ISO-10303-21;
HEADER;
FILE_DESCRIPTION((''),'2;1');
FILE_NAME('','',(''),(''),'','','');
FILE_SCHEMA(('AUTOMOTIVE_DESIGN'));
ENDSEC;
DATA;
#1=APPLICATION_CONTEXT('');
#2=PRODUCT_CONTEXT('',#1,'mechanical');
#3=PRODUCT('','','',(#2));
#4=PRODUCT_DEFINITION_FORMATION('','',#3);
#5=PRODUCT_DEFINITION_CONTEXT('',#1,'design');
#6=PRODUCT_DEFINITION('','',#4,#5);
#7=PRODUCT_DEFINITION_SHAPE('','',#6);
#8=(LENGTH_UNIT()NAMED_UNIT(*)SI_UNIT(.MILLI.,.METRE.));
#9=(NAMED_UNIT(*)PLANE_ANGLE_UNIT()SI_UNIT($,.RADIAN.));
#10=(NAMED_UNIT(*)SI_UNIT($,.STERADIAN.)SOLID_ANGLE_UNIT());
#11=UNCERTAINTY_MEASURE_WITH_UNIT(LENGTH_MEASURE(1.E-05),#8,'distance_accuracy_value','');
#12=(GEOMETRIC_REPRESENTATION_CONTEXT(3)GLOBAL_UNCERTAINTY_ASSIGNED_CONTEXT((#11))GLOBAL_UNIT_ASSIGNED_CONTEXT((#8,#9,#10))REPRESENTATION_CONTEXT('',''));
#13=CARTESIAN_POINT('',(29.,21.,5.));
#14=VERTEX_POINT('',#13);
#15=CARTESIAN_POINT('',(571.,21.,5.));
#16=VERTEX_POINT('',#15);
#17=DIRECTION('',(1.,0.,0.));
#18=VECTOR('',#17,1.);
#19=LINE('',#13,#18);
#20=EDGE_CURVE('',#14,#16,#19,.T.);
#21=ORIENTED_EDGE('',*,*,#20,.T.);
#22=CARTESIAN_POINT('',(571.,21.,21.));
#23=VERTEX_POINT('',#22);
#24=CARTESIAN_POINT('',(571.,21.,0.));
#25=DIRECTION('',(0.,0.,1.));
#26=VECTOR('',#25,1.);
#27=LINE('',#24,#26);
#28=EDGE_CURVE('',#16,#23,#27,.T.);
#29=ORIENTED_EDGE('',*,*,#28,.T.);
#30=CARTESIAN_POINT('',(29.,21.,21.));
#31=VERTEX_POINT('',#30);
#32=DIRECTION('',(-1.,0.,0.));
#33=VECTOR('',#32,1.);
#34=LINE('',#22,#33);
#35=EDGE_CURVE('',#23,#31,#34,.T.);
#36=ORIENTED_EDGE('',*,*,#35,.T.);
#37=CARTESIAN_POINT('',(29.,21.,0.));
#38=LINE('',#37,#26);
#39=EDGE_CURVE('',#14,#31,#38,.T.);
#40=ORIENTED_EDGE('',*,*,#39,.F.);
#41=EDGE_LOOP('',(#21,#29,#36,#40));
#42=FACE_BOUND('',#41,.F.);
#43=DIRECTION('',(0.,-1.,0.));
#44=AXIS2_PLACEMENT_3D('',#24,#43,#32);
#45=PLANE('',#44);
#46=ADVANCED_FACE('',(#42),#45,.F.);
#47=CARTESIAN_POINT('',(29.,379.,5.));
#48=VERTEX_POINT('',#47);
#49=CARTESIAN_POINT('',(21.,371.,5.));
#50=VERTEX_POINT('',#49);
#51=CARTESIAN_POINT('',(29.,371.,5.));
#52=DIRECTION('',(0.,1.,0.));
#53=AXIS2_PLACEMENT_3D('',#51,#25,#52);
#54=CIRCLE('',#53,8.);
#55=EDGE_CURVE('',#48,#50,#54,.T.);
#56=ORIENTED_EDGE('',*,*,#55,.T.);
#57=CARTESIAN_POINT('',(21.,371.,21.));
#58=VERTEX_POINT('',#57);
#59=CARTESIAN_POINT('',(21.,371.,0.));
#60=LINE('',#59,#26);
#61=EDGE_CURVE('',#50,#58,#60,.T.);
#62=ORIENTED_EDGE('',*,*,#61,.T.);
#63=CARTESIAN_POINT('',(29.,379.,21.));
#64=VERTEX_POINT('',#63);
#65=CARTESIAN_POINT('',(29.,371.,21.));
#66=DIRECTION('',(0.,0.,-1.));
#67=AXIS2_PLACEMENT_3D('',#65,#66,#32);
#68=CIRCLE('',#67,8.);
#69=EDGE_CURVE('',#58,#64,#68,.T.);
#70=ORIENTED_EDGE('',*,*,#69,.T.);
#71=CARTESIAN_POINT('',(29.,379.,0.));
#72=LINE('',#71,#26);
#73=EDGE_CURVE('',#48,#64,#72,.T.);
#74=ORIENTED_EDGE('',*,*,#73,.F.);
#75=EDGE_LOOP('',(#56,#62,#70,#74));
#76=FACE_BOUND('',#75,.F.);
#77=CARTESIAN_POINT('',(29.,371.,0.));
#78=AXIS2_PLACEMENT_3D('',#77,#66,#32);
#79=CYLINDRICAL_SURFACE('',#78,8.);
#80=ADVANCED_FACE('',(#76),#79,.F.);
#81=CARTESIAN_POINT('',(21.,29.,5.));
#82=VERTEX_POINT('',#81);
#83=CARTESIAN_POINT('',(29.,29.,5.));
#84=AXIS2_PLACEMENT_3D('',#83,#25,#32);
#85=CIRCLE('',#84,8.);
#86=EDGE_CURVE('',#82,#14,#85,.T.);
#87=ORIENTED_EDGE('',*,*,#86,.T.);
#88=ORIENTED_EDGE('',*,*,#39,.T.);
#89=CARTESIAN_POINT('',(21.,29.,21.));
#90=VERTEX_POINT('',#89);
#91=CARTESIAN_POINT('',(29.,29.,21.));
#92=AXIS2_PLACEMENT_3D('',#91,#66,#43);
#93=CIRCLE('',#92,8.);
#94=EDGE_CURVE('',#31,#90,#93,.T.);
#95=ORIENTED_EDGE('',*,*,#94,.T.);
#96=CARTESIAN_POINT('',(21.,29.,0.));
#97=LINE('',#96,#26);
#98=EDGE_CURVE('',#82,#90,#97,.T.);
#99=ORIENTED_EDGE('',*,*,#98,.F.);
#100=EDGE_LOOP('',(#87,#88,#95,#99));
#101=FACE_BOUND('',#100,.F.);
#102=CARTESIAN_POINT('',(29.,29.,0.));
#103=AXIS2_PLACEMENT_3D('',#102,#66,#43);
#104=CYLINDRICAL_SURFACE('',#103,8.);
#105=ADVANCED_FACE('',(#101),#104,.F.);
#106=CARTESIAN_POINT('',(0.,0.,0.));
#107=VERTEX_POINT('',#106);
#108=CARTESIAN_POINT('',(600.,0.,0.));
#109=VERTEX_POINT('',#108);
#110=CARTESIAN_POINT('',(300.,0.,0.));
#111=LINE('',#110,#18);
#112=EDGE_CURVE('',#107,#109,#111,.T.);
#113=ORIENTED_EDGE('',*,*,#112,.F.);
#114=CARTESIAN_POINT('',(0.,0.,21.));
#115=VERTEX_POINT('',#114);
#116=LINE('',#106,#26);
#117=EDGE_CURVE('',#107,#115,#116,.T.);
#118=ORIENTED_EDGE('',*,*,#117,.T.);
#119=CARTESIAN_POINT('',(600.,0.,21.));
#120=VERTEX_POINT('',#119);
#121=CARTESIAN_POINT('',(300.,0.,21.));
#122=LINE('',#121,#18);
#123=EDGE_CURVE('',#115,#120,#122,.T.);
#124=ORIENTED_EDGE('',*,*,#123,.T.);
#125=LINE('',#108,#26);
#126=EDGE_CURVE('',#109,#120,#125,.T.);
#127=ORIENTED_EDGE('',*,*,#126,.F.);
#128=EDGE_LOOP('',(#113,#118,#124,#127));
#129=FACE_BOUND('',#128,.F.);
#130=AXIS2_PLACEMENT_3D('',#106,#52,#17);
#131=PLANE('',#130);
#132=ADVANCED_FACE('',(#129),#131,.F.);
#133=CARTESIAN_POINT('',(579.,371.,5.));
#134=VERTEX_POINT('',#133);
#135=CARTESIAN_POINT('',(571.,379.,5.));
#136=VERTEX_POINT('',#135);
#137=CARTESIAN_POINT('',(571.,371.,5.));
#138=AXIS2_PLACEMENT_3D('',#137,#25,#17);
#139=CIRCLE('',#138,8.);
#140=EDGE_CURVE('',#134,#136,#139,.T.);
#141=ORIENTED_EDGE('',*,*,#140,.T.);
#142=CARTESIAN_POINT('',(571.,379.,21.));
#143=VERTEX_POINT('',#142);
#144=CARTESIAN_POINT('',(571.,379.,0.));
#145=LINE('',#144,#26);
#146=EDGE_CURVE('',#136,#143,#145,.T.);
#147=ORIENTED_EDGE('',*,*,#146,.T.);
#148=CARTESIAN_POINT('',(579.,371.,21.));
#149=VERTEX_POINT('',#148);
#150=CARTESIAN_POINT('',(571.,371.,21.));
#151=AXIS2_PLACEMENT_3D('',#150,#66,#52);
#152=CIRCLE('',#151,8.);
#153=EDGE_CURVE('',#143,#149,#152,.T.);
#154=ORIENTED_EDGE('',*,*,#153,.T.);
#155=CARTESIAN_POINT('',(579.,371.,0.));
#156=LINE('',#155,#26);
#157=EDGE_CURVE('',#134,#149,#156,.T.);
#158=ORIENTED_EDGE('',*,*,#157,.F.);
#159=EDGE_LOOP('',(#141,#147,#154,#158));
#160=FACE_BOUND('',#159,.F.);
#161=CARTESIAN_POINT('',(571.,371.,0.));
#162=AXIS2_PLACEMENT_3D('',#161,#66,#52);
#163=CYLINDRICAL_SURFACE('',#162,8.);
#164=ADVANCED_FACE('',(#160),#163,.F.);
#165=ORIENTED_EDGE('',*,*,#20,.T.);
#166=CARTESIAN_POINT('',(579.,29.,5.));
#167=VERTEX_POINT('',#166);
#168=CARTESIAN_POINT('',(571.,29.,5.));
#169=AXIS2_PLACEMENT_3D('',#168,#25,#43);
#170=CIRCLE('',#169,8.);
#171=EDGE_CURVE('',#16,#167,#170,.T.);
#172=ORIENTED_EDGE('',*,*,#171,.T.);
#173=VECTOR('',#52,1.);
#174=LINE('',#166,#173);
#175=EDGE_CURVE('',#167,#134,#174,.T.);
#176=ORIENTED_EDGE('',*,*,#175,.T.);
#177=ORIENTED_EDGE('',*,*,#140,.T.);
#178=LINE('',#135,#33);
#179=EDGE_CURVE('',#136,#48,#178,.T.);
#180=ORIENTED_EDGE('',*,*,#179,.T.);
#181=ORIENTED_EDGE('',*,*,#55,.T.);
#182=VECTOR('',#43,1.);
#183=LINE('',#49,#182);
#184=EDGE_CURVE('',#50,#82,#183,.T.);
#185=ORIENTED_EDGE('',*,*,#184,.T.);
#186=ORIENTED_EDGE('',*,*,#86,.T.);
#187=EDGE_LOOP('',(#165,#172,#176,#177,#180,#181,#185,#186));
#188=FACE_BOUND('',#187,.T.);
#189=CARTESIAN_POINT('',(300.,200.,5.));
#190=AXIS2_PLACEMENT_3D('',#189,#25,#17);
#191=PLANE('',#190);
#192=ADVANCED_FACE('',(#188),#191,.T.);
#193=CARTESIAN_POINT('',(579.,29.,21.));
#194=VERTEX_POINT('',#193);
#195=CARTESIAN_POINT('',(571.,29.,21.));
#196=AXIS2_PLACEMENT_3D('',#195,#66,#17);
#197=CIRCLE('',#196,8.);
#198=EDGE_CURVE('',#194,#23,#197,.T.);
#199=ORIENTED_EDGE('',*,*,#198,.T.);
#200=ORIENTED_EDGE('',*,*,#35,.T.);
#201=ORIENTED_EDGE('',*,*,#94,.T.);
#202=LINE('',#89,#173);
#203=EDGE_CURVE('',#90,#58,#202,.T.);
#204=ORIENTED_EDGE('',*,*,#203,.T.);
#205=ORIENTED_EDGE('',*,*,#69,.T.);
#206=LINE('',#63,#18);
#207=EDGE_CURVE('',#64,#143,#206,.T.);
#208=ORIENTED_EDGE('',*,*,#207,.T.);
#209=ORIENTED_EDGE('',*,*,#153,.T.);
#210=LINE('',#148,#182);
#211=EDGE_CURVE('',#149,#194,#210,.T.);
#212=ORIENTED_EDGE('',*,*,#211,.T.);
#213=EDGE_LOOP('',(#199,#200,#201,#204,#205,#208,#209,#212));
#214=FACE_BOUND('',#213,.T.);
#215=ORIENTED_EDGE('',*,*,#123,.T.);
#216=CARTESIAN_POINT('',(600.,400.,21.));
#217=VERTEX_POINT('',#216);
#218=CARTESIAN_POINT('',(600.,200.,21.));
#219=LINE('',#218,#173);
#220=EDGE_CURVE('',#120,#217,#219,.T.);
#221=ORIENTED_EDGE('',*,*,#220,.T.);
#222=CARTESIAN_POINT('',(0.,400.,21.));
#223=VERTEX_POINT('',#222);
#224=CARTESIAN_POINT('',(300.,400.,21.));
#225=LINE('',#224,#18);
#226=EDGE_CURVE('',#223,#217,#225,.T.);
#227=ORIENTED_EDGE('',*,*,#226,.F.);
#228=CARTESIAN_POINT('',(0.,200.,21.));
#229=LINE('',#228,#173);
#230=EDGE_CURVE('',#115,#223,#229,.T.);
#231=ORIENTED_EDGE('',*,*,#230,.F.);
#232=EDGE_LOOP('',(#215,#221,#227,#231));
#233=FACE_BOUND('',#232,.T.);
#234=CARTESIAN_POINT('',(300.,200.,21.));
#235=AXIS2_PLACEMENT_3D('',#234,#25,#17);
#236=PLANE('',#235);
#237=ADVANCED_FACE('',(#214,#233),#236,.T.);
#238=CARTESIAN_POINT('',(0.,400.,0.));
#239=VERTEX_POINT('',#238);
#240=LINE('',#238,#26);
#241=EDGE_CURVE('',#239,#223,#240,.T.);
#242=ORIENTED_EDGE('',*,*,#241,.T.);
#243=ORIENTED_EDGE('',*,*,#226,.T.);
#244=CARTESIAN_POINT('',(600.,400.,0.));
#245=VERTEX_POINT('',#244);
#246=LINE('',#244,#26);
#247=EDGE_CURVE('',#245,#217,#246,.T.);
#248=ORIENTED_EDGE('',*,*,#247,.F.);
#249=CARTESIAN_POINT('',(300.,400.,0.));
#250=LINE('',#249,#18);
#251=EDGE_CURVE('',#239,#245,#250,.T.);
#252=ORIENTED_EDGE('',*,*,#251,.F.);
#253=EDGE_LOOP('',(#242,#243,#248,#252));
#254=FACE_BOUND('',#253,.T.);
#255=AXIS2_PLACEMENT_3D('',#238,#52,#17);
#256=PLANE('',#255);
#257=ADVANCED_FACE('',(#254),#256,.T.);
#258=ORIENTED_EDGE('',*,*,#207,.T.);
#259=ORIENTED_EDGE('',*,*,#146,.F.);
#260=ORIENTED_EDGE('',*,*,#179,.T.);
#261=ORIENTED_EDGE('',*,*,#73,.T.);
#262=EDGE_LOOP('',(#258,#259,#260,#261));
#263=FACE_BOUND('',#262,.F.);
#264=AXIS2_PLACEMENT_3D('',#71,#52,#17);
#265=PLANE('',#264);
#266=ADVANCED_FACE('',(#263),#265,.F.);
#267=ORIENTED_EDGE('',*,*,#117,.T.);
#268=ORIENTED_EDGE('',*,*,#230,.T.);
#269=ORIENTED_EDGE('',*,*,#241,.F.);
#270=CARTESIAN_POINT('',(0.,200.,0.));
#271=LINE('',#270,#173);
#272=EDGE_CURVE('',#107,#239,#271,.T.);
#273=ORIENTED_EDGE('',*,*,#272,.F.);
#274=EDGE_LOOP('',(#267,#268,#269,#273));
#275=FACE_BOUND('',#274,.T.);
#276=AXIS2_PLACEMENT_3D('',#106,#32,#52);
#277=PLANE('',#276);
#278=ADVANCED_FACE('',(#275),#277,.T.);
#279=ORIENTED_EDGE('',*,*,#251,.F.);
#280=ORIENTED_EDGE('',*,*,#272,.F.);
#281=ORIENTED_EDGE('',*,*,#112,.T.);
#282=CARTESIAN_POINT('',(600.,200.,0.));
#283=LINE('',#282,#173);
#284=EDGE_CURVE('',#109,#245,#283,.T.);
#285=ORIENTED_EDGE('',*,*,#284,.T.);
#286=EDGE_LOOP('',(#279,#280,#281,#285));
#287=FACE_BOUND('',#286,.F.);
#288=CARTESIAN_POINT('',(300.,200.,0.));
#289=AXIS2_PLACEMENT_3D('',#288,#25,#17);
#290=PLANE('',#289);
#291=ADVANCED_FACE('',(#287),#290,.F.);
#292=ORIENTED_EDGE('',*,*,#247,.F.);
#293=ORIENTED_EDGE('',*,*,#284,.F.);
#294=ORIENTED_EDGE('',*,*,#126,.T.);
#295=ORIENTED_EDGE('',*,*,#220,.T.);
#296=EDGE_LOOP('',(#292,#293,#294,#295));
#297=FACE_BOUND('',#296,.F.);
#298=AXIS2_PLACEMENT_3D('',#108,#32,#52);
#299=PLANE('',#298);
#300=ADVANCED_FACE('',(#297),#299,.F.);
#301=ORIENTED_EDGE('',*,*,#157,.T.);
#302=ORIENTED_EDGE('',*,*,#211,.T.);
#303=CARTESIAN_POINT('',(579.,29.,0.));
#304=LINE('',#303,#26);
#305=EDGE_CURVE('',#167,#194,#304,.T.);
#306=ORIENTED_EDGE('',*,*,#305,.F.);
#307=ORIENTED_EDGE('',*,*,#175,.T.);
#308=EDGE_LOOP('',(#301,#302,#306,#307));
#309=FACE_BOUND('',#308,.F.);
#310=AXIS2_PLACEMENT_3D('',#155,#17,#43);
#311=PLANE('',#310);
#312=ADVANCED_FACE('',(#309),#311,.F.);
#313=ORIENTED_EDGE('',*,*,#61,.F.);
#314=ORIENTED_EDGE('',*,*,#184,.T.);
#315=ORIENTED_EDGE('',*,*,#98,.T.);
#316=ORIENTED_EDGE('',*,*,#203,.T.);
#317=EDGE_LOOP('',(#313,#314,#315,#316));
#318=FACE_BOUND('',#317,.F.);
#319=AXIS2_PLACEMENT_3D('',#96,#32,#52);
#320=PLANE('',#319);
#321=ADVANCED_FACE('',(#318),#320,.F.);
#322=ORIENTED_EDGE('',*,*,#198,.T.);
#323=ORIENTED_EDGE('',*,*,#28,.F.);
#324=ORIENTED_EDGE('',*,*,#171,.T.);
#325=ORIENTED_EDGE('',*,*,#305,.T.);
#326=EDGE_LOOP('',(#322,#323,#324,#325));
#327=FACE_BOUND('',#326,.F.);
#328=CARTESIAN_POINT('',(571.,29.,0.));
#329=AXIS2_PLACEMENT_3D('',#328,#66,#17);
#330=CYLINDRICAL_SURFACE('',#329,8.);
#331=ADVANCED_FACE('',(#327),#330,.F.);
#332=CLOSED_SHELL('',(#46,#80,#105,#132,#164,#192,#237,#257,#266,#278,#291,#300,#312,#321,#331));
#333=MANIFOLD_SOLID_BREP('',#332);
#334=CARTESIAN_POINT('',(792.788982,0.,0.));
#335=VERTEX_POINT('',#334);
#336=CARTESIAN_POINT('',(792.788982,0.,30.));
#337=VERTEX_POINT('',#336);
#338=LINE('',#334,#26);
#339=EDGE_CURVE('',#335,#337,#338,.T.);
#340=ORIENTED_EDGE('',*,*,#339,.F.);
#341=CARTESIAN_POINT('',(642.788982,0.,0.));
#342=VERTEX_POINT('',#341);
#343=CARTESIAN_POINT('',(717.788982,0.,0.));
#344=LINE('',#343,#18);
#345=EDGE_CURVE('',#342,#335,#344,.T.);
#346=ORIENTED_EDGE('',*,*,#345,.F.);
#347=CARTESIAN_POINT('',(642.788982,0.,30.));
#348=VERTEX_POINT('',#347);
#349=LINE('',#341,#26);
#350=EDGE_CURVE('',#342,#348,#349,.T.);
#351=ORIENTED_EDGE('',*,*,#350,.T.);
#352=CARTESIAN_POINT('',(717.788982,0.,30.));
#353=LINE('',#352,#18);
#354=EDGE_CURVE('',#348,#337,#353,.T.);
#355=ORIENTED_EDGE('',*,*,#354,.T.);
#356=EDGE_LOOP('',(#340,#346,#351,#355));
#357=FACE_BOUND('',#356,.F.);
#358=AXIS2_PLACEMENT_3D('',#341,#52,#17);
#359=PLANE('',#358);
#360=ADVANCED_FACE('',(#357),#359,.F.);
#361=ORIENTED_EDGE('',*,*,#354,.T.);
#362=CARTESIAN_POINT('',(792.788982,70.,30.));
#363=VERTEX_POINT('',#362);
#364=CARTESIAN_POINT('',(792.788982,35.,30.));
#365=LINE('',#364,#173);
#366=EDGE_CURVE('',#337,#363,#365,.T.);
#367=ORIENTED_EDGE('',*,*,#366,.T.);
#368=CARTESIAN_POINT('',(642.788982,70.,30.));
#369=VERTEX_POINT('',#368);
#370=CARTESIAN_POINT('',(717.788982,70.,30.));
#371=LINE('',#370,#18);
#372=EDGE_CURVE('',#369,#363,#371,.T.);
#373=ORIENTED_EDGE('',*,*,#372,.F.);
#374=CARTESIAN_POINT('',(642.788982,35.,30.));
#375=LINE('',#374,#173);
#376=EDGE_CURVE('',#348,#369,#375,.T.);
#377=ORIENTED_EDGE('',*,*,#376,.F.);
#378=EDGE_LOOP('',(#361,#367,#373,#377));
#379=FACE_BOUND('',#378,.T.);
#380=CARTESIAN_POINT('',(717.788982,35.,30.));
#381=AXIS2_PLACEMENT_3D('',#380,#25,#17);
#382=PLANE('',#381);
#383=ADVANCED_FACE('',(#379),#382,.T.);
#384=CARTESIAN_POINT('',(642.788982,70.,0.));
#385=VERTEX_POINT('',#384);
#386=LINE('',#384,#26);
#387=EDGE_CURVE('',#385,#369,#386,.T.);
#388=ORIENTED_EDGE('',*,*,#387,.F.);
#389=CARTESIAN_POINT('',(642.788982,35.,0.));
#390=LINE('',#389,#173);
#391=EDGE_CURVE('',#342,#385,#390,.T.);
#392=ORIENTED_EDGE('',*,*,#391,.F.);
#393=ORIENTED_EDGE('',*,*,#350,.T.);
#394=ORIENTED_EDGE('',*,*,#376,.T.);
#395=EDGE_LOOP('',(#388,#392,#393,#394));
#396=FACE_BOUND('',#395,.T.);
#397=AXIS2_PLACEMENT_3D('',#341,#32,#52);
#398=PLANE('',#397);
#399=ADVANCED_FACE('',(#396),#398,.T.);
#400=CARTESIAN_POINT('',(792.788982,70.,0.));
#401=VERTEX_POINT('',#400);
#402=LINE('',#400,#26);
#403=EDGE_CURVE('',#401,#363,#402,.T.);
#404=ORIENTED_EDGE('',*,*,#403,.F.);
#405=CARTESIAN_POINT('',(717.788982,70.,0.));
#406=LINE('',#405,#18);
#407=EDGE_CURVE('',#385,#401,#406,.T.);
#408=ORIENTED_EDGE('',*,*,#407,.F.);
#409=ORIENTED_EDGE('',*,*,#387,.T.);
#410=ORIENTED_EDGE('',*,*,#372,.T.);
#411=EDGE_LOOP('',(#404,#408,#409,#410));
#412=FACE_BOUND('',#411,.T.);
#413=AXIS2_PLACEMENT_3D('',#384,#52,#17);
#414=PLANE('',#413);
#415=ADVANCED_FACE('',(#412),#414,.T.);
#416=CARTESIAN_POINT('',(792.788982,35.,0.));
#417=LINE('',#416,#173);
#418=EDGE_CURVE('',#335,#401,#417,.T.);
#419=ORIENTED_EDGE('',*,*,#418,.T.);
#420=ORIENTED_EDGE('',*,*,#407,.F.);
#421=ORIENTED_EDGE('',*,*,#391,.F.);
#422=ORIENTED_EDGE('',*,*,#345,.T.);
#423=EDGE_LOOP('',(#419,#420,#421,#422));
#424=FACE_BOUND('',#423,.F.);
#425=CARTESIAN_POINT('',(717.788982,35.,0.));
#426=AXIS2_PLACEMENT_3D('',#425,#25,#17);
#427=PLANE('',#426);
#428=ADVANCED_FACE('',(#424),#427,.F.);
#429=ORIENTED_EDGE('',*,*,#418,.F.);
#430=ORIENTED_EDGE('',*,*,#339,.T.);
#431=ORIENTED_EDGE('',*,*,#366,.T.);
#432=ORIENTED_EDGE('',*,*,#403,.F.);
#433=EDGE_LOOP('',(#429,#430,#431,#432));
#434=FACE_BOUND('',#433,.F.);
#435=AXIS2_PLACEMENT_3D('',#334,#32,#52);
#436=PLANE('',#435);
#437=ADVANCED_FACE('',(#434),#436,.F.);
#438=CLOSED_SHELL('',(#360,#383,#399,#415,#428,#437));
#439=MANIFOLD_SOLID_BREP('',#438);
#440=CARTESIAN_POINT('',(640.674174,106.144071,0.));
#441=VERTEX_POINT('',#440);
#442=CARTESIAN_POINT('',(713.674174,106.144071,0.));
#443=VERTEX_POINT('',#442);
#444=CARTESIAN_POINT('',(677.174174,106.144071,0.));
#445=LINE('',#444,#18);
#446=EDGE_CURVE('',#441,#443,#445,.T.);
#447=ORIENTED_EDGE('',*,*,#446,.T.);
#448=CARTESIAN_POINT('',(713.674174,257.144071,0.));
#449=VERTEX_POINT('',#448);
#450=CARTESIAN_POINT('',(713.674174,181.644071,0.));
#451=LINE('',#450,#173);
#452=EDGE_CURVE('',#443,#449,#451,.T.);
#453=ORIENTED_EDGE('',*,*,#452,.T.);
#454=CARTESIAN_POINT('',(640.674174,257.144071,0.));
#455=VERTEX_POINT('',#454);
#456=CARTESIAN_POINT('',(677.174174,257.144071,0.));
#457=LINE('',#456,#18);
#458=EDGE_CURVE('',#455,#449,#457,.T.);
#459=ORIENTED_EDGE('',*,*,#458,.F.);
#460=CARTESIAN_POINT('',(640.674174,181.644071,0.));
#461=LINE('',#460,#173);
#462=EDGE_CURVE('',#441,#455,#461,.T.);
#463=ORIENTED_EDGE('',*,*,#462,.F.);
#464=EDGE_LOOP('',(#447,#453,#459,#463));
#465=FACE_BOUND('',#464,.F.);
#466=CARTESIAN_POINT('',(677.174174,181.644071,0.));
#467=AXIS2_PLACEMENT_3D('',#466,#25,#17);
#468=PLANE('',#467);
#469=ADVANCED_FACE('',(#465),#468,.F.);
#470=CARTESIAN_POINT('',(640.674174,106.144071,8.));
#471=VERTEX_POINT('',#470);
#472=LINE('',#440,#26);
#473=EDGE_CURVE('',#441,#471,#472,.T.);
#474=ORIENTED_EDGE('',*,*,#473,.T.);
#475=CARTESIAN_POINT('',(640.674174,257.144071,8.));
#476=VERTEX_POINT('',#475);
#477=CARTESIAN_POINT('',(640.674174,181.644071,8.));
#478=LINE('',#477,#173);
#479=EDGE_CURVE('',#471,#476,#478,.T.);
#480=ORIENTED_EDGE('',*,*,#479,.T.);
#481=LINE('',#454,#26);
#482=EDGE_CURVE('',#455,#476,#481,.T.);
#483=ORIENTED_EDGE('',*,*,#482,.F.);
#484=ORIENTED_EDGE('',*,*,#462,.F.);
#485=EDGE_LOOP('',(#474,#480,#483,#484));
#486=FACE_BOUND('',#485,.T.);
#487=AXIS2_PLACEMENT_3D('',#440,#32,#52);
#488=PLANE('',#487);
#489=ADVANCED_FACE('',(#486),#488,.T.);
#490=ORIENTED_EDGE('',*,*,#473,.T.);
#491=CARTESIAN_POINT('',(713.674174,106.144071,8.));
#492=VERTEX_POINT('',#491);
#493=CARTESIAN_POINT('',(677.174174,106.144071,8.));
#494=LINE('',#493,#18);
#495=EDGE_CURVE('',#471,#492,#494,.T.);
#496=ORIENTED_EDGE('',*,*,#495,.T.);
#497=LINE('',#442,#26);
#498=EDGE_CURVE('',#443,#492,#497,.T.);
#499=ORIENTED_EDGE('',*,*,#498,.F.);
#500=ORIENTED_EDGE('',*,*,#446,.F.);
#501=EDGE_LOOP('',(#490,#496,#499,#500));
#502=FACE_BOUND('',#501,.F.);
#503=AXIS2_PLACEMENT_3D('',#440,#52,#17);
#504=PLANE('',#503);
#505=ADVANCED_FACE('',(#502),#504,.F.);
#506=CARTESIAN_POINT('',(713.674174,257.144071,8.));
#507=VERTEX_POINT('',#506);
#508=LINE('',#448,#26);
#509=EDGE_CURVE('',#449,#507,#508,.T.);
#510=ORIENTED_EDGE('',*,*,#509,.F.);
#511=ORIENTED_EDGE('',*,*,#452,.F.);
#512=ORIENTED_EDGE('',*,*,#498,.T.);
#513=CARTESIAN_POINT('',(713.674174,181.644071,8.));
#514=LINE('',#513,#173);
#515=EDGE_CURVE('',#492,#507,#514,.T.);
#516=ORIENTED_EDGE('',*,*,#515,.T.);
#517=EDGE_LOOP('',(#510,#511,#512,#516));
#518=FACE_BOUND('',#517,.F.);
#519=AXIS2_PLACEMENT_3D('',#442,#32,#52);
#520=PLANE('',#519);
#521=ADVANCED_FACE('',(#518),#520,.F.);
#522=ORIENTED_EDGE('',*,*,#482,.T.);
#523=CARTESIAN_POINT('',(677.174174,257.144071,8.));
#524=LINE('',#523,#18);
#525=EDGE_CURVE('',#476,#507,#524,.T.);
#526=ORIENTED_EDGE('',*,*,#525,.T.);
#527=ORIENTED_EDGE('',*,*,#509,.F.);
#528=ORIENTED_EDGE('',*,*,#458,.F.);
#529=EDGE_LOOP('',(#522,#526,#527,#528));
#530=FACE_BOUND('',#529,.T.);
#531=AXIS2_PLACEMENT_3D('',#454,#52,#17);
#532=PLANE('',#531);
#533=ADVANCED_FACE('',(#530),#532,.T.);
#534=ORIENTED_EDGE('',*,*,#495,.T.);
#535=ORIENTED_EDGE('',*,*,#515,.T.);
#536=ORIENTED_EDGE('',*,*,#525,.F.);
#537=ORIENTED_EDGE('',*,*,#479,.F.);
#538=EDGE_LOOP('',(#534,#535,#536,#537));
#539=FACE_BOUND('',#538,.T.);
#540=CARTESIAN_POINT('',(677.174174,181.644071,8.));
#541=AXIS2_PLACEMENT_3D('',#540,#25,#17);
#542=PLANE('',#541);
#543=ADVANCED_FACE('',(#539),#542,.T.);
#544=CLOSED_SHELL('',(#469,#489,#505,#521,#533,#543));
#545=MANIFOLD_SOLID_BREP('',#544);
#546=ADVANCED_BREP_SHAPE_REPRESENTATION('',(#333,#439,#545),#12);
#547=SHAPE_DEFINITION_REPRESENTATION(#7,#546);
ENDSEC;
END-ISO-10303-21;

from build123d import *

# Parameters (mm, degrees)
F1_W     = 600
F1_H     = 400
F2_DEPTH = 21
F3_DEPTH = 5
F1_W_2   = 150
F1_H_2   = 70
F4_DEPTH = 30
F1_W_3   = 73
F1_H_3   = 151
F5_DEPTH = 8


with BuildPart() as f2:
    # F1 (on Top) → F2 (new body)
    with BuildSketch(Plane.XY):
        with Locations((300, 200)):
            Rectangle(F1_W, F1_H)
        with BuildLine():
            ThreePointArc((21, 371), (23.3431457505, 376.6568542495), (29, 379))
            Line((29, 379), (571, 379))
            ThreePointArc((571, 379), (576.6568542495, 376.6568542495), (579, 371))
            Line((579, 371), (579, 29))
            ThreePointArc((579, 29), (576.6568542495, 23.3431457505), (571, 21))
            Line((571, 21), (29, 21))
            ThreePointArc((29, 21), (23.3431457505, 23.3431457505), (21, 29))
            Line((21, 29), (21, 371))
        make_face(mode=Mode.SUBTRACT)
    extrude(amount=F2_DEPTH)

    # F1 (on Top) → F3 (join)
    with BuildSketch(Plane.XY):
        with BuildLine():
            Line((571, 379), (29, 379))
            ThreePointArc((29, 379), (23.3431457505, 376.6568542495), (21, 371))
            Line((21, 371), (21, 29))
            ThreePointArc((21, 29), (23.3431457505, 23.3431457505), (29, 21))
            Line((29, 21), (571, 21))
            ThreePointArc((571, 21), (576.6568542495, 23.3431457505), (579, 29))
            Line((579, 29), (579, 371))
            ThreePointArc((579, 371), (576.6568542495, 376.6568542495), (571, 379))
        make_face()
    extrude(amount=F3_DEPTH)


with BuildPart() as f4:
    # F1 (on Top) → F4 (new body)
    with BuildSketch(Plane.XY):
        with Locations((717.7889823914, 35)):
            Rectangle(F1_W_2, F1_H_2)
    extrude(amount=F4_DEPTH)


with BuildPart() as f5:
    # F1 (on Top) → F5 (new body)
    with BuildSketch(Plane.XY):
        with Locations((677.1741738319, 181.6440706253)):
            Rectangle(F1_W_3, F1_H_3)
    extrude(amount=F5_DEPTH)


solid = Compound([f2.part, f4.part, f5.part])
